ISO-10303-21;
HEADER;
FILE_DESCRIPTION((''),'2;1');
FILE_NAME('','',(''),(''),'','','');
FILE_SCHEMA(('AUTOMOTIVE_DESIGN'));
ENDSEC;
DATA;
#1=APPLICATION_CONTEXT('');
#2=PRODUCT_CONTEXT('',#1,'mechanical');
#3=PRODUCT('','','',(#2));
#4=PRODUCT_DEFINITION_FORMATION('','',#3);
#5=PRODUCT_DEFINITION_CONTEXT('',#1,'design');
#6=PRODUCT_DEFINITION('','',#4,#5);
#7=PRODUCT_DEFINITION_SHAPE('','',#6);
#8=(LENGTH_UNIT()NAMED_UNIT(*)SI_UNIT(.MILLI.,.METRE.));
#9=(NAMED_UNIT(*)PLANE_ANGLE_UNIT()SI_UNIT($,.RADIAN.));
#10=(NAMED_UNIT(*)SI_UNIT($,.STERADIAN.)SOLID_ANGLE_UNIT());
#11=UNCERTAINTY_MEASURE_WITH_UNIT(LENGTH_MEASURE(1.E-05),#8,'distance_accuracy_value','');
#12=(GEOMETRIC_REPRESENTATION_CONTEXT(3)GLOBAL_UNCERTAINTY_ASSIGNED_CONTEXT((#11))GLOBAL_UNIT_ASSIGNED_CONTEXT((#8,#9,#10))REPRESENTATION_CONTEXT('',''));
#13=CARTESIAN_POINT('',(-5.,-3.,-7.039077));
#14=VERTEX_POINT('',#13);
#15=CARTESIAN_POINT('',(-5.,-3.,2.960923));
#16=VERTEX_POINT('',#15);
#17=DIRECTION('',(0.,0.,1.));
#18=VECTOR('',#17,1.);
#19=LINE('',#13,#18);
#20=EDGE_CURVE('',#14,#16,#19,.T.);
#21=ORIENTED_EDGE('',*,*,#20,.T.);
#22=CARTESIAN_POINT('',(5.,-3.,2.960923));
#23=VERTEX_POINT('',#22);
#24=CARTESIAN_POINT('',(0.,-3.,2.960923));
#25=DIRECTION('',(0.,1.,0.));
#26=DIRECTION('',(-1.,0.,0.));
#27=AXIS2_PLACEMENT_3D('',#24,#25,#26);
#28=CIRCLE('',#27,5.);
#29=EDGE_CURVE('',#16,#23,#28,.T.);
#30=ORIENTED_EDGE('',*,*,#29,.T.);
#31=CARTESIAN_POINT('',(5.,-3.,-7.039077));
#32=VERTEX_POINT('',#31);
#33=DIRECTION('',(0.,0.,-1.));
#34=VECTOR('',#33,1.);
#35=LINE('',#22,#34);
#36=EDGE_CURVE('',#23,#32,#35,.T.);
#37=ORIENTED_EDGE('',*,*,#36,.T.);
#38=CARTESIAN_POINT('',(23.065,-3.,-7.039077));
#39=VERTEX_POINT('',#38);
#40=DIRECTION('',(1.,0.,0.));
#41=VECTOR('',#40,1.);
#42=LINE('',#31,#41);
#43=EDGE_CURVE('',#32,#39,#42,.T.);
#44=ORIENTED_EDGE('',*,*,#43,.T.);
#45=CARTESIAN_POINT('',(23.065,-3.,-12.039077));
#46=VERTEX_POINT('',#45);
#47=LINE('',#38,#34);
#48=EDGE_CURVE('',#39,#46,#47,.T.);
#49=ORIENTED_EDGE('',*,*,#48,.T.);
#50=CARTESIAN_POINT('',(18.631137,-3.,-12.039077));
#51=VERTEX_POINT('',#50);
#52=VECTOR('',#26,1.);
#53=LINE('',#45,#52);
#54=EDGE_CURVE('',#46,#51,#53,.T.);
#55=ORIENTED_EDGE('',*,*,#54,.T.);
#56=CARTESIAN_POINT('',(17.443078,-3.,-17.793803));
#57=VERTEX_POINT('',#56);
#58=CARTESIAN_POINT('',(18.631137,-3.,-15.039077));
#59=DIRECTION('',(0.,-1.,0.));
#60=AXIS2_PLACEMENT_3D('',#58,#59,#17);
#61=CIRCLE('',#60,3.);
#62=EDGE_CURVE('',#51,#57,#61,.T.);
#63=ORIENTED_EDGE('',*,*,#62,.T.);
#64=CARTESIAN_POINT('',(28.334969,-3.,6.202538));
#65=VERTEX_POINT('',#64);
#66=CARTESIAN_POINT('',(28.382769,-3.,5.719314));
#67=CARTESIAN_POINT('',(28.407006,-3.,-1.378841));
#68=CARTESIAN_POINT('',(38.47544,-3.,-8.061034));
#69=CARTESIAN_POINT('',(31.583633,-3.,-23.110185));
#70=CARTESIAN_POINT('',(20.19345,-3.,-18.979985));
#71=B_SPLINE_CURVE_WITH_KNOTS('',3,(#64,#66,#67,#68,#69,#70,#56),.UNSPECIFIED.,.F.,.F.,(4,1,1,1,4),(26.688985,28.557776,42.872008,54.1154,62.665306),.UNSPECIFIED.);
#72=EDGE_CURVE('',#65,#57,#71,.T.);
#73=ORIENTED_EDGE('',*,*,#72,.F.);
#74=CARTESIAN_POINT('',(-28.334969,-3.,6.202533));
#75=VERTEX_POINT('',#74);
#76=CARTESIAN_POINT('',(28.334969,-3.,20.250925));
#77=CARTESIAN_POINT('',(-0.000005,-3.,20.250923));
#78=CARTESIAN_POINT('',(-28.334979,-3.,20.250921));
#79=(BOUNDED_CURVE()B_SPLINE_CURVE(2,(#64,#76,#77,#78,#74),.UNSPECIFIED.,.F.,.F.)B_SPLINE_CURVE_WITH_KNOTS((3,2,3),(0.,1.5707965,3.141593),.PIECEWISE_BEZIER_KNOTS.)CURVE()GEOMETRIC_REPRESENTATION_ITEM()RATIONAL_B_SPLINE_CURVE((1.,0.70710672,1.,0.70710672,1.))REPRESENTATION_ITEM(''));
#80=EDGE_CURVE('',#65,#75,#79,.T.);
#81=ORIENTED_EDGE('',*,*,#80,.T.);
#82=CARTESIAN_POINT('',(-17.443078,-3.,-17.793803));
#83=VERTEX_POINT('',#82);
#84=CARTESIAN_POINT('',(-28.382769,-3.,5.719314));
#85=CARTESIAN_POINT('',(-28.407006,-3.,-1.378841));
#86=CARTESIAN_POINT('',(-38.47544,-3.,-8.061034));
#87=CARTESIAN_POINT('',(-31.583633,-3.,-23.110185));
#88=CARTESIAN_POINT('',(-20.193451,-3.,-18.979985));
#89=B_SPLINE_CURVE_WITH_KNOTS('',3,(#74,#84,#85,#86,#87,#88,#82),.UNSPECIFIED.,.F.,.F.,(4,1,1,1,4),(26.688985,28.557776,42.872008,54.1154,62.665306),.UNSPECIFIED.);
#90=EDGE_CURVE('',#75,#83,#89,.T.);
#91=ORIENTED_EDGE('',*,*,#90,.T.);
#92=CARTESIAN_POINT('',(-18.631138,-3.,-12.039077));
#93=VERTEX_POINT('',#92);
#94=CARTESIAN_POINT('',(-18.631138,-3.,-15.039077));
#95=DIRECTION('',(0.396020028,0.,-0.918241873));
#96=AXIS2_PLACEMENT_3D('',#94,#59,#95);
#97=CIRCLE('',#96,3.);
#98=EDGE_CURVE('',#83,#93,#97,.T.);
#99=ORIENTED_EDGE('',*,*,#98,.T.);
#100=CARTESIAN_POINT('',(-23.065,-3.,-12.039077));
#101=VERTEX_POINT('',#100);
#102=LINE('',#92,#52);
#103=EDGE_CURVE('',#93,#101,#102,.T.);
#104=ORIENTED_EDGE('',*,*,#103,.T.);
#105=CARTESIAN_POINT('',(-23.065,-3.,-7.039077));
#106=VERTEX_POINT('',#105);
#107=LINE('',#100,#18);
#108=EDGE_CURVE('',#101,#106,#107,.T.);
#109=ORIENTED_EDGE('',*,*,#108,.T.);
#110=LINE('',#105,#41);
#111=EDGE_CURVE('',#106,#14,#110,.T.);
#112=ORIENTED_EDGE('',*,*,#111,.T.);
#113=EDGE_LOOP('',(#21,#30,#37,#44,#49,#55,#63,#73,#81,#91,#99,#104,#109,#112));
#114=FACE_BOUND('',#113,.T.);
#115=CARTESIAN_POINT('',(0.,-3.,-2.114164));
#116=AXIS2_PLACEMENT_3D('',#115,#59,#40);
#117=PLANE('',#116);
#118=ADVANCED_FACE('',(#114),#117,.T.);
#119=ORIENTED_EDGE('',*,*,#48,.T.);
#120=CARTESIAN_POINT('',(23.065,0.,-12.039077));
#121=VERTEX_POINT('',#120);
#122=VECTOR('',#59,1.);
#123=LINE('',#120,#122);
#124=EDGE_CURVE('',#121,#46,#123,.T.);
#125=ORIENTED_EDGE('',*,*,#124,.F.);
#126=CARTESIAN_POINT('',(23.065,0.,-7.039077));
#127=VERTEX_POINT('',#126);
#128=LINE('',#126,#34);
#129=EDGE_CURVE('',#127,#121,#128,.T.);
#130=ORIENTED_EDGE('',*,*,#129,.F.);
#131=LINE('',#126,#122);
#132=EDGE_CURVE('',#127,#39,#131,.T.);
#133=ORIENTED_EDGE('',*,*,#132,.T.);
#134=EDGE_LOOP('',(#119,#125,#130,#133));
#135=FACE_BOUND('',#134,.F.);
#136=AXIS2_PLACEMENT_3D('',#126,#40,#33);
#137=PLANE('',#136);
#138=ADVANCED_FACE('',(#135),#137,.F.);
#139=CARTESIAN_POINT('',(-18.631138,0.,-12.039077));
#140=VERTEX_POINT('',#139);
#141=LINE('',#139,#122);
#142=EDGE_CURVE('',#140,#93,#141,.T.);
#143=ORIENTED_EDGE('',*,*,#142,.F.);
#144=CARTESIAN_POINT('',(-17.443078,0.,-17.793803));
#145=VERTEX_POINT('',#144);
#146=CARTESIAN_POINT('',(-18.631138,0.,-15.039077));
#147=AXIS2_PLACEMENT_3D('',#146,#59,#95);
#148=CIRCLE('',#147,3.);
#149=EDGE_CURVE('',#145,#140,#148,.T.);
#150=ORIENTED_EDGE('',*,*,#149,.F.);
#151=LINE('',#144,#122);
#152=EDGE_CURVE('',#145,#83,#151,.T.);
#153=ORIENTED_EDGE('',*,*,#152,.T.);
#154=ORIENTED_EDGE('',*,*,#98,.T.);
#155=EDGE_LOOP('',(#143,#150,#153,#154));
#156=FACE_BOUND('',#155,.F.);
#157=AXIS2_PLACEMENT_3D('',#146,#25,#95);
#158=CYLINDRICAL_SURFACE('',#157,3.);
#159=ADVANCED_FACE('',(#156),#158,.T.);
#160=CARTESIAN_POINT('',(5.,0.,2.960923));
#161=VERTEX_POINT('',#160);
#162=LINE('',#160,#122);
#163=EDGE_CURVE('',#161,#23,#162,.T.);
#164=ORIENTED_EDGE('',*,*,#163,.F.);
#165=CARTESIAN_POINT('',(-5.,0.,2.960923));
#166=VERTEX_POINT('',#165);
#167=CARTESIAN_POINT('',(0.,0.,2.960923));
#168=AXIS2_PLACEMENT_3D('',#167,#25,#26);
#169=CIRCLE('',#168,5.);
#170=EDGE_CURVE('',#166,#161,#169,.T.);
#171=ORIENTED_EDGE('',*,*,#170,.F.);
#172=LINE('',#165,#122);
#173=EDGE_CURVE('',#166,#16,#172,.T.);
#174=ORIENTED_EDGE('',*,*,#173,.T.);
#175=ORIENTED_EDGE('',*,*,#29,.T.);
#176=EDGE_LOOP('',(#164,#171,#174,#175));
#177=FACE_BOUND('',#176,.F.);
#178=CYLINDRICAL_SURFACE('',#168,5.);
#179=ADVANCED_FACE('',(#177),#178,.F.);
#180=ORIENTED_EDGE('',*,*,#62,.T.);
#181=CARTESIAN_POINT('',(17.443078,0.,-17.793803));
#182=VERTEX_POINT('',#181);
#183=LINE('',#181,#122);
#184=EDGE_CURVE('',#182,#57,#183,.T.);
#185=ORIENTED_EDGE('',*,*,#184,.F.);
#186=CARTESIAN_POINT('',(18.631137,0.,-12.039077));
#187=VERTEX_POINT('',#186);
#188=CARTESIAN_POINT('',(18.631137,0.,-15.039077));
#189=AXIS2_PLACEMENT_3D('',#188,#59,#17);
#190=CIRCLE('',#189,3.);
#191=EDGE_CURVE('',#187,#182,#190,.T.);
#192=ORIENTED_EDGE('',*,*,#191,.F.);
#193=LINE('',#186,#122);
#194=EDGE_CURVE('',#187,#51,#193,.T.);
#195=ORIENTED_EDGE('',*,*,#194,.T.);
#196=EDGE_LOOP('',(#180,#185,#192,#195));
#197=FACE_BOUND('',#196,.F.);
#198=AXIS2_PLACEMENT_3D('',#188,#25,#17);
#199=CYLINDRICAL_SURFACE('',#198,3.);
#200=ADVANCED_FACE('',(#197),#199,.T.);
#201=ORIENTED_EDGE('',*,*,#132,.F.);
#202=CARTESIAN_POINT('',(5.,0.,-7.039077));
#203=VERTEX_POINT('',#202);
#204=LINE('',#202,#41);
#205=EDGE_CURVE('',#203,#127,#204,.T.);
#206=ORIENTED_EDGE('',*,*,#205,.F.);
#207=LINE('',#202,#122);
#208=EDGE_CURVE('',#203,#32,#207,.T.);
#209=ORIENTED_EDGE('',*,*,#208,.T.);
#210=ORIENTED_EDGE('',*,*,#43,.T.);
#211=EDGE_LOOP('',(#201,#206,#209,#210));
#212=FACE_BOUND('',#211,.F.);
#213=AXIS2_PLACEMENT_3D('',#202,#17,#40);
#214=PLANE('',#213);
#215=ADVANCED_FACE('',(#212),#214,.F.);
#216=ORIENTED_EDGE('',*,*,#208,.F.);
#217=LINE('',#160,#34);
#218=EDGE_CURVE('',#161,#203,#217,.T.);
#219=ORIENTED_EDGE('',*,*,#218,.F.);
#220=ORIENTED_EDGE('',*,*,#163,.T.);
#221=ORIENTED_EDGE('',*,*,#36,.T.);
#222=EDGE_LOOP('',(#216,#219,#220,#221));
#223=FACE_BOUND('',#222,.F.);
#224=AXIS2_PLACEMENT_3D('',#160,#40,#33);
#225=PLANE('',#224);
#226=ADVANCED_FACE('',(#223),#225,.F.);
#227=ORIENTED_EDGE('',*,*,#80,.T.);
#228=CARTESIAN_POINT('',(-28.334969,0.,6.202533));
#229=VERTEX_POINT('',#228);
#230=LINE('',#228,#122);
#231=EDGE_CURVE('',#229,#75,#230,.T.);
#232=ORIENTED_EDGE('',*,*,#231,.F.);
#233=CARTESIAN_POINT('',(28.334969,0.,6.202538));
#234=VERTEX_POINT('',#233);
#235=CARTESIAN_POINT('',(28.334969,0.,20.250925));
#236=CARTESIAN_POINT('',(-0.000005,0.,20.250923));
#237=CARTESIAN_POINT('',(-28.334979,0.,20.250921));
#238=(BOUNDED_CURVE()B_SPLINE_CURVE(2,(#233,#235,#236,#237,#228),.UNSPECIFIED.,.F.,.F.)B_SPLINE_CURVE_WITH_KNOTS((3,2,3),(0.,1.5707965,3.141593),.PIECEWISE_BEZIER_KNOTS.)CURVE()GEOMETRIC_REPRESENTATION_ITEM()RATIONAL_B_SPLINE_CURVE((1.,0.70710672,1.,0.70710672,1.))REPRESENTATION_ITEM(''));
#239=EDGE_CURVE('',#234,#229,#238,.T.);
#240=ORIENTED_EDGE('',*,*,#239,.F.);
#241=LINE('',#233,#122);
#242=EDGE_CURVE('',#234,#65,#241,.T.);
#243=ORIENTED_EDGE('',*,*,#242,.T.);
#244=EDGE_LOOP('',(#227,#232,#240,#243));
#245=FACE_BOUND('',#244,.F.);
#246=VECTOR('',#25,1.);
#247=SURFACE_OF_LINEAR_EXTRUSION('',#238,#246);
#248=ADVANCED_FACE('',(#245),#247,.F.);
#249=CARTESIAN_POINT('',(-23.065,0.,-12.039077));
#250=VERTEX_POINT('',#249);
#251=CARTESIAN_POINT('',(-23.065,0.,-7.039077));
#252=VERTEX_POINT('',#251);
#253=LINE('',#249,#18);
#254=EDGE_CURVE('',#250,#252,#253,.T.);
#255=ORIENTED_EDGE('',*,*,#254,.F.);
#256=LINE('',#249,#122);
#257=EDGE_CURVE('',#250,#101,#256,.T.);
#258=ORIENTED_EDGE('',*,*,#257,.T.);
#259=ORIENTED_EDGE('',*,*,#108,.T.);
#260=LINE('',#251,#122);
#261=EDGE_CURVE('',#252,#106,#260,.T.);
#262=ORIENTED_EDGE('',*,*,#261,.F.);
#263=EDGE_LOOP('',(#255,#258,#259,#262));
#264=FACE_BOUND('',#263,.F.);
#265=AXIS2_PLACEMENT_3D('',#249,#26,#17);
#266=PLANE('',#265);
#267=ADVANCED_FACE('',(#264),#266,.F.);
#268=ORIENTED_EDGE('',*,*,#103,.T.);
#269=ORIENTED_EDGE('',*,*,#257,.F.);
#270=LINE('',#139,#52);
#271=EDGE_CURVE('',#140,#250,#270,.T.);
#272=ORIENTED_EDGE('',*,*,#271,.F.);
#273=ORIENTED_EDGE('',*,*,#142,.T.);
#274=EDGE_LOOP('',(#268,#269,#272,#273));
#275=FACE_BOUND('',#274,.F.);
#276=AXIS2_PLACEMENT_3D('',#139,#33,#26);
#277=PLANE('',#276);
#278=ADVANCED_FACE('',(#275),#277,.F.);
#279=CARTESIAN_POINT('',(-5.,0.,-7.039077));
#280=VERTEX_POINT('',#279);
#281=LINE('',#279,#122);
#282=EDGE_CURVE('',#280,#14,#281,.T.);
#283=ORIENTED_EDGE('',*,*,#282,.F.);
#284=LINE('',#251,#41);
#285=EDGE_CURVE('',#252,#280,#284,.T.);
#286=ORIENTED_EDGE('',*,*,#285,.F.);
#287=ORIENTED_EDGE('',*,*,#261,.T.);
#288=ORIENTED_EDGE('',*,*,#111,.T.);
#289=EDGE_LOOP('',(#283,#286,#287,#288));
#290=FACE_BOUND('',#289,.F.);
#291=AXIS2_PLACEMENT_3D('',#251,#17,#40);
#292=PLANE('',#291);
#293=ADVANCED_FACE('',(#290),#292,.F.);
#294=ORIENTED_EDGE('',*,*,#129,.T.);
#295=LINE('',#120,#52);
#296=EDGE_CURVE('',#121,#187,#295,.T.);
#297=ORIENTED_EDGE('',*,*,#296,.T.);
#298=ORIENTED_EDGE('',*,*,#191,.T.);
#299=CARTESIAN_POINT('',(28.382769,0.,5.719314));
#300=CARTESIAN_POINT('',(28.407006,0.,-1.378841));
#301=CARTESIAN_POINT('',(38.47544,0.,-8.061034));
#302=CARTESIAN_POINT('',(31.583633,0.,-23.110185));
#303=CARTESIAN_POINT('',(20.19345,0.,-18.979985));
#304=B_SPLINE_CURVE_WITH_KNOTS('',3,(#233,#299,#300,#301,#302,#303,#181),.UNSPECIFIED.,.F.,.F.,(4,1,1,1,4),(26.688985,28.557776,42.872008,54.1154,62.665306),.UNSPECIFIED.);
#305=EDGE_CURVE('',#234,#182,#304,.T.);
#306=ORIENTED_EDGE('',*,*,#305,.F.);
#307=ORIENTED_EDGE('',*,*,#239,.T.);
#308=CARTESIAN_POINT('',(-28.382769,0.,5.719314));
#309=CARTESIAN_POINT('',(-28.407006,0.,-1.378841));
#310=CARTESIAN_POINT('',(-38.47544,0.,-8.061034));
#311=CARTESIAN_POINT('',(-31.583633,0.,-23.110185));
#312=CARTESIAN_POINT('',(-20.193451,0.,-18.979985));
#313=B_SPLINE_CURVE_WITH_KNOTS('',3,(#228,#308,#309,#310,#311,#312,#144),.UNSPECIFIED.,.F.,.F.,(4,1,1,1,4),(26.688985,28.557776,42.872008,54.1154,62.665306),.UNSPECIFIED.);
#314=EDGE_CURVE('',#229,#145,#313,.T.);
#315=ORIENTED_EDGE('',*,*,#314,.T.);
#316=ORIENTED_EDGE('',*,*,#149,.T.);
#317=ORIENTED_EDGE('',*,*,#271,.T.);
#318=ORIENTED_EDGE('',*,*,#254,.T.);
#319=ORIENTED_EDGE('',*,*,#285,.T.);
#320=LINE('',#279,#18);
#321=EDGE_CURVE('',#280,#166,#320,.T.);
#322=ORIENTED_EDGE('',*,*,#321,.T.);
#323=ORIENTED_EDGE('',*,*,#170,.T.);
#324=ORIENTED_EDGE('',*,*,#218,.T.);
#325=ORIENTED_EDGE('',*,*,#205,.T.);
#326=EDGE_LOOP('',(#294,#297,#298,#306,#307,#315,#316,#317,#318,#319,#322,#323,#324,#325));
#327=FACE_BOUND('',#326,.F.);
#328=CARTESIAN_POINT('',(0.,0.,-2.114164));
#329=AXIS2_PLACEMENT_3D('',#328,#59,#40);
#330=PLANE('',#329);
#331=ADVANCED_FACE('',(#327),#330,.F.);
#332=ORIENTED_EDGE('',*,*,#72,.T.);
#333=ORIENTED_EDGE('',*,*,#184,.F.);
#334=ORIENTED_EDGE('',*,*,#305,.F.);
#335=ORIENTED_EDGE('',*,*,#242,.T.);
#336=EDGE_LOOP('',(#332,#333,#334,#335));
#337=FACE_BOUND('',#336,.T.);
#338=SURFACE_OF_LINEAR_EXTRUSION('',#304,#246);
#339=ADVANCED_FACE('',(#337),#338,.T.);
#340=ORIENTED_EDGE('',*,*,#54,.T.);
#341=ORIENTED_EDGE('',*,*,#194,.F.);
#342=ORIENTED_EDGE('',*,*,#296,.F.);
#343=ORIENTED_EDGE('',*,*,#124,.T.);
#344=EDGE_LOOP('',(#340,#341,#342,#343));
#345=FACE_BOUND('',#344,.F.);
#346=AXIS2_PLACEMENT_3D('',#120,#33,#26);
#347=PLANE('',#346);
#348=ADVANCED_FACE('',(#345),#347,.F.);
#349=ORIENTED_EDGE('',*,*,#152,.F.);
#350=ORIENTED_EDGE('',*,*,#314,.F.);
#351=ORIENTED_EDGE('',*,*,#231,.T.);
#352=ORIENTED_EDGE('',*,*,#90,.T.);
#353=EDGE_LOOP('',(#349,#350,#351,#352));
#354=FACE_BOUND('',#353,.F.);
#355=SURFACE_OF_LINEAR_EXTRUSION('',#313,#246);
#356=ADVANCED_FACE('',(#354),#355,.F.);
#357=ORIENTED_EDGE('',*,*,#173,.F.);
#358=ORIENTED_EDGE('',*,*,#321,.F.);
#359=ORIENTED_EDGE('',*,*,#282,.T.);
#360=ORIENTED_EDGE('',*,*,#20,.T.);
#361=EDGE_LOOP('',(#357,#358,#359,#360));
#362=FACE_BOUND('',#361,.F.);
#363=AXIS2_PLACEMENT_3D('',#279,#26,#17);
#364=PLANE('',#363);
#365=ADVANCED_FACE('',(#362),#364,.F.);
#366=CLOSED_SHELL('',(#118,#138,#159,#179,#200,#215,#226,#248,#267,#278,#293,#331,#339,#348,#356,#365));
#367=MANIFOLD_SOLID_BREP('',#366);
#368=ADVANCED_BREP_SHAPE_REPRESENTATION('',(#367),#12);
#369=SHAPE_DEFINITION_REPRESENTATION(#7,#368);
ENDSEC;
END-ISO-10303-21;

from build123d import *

# Parameters (mm, degrees)
F1_DEPTH = 3


# Not quite as in the source:
# - ends of sketch curves that miss each other by under 0.0002 mm in the source are joined
# - the dataset's text gives a spline's control points without its knots; the knots are read off the source's solid


with BuildPart() as f1:
    # F0 (on Front) → F1 (new body)
    with BuildSketch(Plane.XZ):
        with BuildLine():
            Line((-18.631138, -12.039077), (-23.065, -12.039077))
            Line((-23.065, -12.039077), (-23.065, -7.039077))
            Line((-23.065, -7.039077), (-5, -7.039077))
            Line((-5, -7.039077), (-5, 2.960923))
            ThreePointArc((-5, 2.960923), (0, 7.960923), (5, 2.960923))
            Line((5, 2.960923), (5, -7.039077))
            Line((5, -7.039077), (23.065, -7.039077))
            Line((23.065, -7.039077), (23.065, -12.039077))
            Line((23.065, -12.039077), (18.631137, -12.039077))
            ThreePointArc((18.631137, -12.039077), (15.6930952866, -14.4325204153), (17.4430779685, -17.7938030731))
            add(Edge.make_bspline(
                [(28.334969, 6.202538), (28.382769, 5.719314), (28.407006, -1.378841), (38.47544, -8.061034), (31.583633, -23.110185), (20.19345, -18.979985), (17.4430779685, -17.7938030731)],
                knots=[26.688985, 26.688985, 26.688985, 26.688985, 28.557776, 42.872008, 54.1154, 62.665306, 62.665306, 62.665306, 62.665306], degree=3))
            add(Edge.make_bspline(
                [(28.334969, 6.202538), (28.334969, 20.2509254333), (-4.9078e-06, 20.250923), (-28.3349788155, 20.2509205667), (-28.334969, 6.2025331335)],
                knots=[0, 0, 0, 1.5707965, 1.5707965, 3.141593, 3.141593, 3.141593], degree=2, weights=[1, 0.7071067199, 1, 0.7071067199, 1]))
            add(Edge.make_bspline(
                [(-28.334969, 6.2025331335), (-28.382769, 5.719314), (-28.407006, -1.378841), (-38.47544, -8.061034), (-31.583633, -23.110185), (-20.193451, -18.979985), (-17.443078, -17.793803)],
                knots=[26.688985, 26.688985, 26.688985, 26.688985, 28.557776, 42.872008, 54.1154, 62.665306, 62.665306, 62.665306, 62.665306], degree=3))
            ThreePointArc((-17.443078, -17.793803), (-15.6930963794, -14.4325199657), (-18.631138, -12.039077))
        make_face()
    extrude(amount=F1_DEPTH)


solid = f1.part
